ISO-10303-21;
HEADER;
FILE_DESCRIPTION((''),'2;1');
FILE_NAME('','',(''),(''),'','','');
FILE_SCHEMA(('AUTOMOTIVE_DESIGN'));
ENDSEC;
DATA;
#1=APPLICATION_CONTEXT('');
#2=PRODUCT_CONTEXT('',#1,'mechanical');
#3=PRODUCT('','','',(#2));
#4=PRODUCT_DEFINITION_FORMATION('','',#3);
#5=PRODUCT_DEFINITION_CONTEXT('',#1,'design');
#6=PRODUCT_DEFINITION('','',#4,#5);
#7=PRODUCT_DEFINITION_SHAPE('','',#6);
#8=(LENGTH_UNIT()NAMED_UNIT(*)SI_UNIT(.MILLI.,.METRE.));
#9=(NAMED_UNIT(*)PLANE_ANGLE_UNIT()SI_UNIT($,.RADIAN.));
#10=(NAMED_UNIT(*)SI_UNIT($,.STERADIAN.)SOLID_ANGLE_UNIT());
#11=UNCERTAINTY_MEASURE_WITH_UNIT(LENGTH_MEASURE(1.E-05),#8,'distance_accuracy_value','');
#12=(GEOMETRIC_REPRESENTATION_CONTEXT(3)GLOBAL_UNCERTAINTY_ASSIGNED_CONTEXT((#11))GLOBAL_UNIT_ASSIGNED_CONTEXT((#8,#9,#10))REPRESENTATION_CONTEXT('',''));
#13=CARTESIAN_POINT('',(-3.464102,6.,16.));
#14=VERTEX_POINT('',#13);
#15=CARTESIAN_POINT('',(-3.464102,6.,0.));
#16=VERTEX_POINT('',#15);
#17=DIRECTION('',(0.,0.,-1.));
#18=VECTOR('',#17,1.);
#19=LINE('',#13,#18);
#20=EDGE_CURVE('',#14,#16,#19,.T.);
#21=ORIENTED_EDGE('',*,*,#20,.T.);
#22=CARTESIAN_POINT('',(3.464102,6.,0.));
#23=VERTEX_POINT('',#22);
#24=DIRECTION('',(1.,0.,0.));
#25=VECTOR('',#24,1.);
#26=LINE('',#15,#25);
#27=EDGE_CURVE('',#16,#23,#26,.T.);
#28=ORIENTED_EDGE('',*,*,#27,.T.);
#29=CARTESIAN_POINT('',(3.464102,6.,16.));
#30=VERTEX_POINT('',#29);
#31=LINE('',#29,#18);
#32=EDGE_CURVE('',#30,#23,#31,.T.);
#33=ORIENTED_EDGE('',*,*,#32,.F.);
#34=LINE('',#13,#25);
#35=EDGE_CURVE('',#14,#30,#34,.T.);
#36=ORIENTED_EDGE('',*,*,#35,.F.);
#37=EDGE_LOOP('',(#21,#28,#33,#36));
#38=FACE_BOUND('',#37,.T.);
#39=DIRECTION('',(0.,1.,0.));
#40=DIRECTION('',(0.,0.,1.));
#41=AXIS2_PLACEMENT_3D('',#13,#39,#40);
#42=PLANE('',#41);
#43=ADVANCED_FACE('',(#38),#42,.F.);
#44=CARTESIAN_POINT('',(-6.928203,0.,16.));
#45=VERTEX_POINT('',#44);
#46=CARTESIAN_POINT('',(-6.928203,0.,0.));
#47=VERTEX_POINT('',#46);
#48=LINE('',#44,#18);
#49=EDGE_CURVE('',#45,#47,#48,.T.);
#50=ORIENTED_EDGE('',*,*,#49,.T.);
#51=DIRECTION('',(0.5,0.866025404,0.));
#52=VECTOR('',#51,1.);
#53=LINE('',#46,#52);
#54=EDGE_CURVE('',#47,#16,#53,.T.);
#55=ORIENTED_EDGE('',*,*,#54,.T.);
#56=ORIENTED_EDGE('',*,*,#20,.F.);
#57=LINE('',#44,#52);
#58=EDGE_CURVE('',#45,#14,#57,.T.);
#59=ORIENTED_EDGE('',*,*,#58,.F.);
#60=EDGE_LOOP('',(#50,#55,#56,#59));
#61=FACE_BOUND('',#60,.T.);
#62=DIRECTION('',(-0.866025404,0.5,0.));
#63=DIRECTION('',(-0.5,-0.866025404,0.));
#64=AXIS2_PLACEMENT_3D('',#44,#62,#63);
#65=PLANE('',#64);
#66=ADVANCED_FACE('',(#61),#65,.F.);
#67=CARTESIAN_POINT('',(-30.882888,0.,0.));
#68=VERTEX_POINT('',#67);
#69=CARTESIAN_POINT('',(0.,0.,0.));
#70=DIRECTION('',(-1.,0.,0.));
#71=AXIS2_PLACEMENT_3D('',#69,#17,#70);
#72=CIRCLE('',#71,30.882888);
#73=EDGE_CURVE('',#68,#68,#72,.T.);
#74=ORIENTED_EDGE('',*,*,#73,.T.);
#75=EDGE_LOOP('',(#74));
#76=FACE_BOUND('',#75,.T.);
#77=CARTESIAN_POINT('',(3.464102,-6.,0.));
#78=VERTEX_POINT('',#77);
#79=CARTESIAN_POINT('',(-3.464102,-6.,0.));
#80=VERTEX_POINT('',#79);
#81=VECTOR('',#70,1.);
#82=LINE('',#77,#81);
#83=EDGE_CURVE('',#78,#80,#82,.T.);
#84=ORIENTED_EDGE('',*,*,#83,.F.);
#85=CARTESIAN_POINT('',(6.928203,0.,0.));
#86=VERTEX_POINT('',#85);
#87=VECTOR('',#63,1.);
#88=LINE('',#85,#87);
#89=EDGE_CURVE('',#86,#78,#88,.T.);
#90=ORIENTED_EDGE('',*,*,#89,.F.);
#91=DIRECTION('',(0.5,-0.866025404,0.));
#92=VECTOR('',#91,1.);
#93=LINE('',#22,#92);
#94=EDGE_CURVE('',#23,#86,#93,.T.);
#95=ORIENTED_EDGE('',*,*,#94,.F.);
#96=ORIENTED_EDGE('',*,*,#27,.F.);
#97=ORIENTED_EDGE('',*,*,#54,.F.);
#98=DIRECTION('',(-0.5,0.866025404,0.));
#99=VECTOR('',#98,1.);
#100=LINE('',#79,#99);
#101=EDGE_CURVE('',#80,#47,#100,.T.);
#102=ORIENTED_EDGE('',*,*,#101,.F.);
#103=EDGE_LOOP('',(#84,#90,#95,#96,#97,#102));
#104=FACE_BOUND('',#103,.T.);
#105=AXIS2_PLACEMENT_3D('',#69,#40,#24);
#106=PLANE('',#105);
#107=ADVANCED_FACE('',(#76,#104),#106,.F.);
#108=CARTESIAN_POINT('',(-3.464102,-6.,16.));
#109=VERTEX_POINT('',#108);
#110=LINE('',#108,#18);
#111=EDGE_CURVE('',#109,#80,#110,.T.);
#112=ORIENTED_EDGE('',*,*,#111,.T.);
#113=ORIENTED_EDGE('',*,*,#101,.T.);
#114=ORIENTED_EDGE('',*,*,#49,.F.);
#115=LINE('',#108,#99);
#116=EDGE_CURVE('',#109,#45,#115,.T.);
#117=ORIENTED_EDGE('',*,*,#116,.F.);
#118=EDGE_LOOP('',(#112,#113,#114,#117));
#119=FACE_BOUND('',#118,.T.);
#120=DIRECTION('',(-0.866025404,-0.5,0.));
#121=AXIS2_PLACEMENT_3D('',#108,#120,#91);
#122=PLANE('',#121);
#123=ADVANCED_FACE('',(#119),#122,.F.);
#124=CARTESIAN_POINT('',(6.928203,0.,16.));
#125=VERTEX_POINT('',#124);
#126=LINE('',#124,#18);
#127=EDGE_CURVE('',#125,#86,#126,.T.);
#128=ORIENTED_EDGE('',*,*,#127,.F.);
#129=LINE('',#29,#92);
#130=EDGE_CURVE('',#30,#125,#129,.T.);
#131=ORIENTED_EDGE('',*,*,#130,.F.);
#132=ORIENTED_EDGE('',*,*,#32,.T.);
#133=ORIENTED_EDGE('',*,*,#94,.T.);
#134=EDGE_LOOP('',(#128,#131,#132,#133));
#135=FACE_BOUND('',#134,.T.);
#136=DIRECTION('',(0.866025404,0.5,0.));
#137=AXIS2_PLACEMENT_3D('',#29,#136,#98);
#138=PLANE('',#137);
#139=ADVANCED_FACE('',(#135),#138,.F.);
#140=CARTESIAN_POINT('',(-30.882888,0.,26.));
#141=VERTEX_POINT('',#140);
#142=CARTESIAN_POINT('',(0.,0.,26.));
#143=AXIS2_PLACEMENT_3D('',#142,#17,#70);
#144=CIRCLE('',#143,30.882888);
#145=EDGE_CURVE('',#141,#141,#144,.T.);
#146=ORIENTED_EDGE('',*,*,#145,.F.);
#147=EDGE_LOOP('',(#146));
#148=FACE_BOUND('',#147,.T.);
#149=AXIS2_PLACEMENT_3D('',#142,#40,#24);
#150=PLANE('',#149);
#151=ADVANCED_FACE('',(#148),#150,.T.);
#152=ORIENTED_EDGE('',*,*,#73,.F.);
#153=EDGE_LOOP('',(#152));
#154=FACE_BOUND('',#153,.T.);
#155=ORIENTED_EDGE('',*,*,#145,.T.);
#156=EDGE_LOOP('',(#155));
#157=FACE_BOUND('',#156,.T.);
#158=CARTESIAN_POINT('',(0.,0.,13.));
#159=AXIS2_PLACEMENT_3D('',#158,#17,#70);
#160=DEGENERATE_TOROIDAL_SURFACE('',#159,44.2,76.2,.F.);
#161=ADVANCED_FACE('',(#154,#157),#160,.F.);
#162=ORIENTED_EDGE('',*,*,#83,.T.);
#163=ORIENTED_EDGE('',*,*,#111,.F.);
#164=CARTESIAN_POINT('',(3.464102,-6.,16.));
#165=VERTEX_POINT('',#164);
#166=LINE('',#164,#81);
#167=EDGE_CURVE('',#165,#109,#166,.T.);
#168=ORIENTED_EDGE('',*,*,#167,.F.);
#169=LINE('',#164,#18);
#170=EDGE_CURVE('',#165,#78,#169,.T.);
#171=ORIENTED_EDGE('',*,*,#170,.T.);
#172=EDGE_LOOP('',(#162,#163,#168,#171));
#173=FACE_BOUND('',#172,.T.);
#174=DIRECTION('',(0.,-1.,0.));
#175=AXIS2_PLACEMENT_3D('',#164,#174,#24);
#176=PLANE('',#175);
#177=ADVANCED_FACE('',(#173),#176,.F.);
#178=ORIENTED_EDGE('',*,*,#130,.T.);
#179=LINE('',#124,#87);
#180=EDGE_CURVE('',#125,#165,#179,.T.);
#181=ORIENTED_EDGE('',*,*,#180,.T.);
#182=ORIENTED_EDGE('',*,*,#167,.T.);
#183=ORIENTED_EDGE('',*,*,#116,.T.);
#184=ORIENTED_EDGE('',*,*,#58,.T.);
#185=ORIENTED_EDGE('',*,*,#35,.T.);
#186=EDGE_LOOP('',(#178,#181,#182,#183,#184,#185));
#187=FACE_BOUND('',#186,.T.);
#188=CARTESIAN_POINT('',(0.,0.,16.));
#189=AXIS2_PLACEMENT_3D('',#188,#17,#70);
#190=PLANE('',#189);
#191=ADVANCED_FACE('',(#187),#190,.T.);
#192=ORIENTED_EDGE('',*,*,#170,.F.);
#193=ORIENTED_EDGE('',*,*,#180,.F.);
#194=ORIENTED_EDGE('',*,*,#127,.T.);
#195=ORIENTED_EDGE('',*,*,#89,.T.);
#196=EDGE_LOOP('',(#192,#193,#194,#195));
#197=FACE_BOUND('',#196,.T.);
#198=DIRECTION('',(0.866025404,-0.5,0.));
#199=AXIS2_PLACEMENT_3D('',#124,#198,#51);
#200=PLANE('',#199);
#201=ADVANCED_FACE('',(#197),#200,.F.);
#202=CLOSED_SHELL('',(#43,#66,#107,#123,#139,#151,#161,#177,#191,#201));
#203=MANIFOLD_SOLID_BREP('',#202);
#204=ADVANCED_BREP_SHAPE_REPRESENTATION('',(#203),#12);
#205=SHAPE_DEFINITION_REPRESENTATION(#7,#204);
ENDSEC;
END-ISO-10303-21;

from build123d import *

# Parameters (mm, degrees)
CROQUIS1_R              = 32
SALIENTE_EXTRUIR1_DEPTH = 26
CORTAR_EXTRUIR1_DEPTH   = 16


# Read off the part's stored shape, not the designer's step: Cortar-Revolución-Lámina1
with BuildPart() as part:
    # Croquis1 → Saliente-Extruir1 (new body)
    with BuildSketch(Plane.XY):
        with Locations(Location((0, 0, 0), (0, 0, 180))):
            Circle(CROQUIS1_R)
    extrude(amount=SALIENTE_EXTRUIR1_DEPTH)

    # Cortar-Revolución-Lámina1 outline → Cortar-Revolución-Lámina1 (revolve, cut)
    with BuildSketch(Plane.XZ):
        with BuildLine():
            ThreePointArc((32, 13), (31.720208212, 6.476045289), (30.882887531, 0))
            Line((30.882887531, 0), (32, 0))
            Line((32, 0), (32, 13))
        make_face()
        with BuildLine():
            ThreePointArc((30.882887531, 26), (31.720208212, 19.523954711), (32, 13))
            Line((32, 13), (32, 26))
            Line((32, 26), (30.882887531, 26))
        make_face()
    revolve(axis=Axis((0, 0, 0), (0, 0, 1)), mode=Mode.SUBTRACT)

    # Croquis3 → Cortar-Extruir1 (cut)
    with BuildSketch(Plane(origin=(0, 0, 0), x_dir=(-1, 0, 0), z_dir=(0, 0, -1))):
        Polygon((3.464101615, -6), (6.92820323, 0), (3.464101615, 6), (-3.464101615, 6), (-6.92820323, 0), (-3.464101615, -6), align=None)
    extrude(amount=-CORTAR_EXTRUIR1_DEPTH, mode=Mode.SUBTRACT)


solid = part.part
